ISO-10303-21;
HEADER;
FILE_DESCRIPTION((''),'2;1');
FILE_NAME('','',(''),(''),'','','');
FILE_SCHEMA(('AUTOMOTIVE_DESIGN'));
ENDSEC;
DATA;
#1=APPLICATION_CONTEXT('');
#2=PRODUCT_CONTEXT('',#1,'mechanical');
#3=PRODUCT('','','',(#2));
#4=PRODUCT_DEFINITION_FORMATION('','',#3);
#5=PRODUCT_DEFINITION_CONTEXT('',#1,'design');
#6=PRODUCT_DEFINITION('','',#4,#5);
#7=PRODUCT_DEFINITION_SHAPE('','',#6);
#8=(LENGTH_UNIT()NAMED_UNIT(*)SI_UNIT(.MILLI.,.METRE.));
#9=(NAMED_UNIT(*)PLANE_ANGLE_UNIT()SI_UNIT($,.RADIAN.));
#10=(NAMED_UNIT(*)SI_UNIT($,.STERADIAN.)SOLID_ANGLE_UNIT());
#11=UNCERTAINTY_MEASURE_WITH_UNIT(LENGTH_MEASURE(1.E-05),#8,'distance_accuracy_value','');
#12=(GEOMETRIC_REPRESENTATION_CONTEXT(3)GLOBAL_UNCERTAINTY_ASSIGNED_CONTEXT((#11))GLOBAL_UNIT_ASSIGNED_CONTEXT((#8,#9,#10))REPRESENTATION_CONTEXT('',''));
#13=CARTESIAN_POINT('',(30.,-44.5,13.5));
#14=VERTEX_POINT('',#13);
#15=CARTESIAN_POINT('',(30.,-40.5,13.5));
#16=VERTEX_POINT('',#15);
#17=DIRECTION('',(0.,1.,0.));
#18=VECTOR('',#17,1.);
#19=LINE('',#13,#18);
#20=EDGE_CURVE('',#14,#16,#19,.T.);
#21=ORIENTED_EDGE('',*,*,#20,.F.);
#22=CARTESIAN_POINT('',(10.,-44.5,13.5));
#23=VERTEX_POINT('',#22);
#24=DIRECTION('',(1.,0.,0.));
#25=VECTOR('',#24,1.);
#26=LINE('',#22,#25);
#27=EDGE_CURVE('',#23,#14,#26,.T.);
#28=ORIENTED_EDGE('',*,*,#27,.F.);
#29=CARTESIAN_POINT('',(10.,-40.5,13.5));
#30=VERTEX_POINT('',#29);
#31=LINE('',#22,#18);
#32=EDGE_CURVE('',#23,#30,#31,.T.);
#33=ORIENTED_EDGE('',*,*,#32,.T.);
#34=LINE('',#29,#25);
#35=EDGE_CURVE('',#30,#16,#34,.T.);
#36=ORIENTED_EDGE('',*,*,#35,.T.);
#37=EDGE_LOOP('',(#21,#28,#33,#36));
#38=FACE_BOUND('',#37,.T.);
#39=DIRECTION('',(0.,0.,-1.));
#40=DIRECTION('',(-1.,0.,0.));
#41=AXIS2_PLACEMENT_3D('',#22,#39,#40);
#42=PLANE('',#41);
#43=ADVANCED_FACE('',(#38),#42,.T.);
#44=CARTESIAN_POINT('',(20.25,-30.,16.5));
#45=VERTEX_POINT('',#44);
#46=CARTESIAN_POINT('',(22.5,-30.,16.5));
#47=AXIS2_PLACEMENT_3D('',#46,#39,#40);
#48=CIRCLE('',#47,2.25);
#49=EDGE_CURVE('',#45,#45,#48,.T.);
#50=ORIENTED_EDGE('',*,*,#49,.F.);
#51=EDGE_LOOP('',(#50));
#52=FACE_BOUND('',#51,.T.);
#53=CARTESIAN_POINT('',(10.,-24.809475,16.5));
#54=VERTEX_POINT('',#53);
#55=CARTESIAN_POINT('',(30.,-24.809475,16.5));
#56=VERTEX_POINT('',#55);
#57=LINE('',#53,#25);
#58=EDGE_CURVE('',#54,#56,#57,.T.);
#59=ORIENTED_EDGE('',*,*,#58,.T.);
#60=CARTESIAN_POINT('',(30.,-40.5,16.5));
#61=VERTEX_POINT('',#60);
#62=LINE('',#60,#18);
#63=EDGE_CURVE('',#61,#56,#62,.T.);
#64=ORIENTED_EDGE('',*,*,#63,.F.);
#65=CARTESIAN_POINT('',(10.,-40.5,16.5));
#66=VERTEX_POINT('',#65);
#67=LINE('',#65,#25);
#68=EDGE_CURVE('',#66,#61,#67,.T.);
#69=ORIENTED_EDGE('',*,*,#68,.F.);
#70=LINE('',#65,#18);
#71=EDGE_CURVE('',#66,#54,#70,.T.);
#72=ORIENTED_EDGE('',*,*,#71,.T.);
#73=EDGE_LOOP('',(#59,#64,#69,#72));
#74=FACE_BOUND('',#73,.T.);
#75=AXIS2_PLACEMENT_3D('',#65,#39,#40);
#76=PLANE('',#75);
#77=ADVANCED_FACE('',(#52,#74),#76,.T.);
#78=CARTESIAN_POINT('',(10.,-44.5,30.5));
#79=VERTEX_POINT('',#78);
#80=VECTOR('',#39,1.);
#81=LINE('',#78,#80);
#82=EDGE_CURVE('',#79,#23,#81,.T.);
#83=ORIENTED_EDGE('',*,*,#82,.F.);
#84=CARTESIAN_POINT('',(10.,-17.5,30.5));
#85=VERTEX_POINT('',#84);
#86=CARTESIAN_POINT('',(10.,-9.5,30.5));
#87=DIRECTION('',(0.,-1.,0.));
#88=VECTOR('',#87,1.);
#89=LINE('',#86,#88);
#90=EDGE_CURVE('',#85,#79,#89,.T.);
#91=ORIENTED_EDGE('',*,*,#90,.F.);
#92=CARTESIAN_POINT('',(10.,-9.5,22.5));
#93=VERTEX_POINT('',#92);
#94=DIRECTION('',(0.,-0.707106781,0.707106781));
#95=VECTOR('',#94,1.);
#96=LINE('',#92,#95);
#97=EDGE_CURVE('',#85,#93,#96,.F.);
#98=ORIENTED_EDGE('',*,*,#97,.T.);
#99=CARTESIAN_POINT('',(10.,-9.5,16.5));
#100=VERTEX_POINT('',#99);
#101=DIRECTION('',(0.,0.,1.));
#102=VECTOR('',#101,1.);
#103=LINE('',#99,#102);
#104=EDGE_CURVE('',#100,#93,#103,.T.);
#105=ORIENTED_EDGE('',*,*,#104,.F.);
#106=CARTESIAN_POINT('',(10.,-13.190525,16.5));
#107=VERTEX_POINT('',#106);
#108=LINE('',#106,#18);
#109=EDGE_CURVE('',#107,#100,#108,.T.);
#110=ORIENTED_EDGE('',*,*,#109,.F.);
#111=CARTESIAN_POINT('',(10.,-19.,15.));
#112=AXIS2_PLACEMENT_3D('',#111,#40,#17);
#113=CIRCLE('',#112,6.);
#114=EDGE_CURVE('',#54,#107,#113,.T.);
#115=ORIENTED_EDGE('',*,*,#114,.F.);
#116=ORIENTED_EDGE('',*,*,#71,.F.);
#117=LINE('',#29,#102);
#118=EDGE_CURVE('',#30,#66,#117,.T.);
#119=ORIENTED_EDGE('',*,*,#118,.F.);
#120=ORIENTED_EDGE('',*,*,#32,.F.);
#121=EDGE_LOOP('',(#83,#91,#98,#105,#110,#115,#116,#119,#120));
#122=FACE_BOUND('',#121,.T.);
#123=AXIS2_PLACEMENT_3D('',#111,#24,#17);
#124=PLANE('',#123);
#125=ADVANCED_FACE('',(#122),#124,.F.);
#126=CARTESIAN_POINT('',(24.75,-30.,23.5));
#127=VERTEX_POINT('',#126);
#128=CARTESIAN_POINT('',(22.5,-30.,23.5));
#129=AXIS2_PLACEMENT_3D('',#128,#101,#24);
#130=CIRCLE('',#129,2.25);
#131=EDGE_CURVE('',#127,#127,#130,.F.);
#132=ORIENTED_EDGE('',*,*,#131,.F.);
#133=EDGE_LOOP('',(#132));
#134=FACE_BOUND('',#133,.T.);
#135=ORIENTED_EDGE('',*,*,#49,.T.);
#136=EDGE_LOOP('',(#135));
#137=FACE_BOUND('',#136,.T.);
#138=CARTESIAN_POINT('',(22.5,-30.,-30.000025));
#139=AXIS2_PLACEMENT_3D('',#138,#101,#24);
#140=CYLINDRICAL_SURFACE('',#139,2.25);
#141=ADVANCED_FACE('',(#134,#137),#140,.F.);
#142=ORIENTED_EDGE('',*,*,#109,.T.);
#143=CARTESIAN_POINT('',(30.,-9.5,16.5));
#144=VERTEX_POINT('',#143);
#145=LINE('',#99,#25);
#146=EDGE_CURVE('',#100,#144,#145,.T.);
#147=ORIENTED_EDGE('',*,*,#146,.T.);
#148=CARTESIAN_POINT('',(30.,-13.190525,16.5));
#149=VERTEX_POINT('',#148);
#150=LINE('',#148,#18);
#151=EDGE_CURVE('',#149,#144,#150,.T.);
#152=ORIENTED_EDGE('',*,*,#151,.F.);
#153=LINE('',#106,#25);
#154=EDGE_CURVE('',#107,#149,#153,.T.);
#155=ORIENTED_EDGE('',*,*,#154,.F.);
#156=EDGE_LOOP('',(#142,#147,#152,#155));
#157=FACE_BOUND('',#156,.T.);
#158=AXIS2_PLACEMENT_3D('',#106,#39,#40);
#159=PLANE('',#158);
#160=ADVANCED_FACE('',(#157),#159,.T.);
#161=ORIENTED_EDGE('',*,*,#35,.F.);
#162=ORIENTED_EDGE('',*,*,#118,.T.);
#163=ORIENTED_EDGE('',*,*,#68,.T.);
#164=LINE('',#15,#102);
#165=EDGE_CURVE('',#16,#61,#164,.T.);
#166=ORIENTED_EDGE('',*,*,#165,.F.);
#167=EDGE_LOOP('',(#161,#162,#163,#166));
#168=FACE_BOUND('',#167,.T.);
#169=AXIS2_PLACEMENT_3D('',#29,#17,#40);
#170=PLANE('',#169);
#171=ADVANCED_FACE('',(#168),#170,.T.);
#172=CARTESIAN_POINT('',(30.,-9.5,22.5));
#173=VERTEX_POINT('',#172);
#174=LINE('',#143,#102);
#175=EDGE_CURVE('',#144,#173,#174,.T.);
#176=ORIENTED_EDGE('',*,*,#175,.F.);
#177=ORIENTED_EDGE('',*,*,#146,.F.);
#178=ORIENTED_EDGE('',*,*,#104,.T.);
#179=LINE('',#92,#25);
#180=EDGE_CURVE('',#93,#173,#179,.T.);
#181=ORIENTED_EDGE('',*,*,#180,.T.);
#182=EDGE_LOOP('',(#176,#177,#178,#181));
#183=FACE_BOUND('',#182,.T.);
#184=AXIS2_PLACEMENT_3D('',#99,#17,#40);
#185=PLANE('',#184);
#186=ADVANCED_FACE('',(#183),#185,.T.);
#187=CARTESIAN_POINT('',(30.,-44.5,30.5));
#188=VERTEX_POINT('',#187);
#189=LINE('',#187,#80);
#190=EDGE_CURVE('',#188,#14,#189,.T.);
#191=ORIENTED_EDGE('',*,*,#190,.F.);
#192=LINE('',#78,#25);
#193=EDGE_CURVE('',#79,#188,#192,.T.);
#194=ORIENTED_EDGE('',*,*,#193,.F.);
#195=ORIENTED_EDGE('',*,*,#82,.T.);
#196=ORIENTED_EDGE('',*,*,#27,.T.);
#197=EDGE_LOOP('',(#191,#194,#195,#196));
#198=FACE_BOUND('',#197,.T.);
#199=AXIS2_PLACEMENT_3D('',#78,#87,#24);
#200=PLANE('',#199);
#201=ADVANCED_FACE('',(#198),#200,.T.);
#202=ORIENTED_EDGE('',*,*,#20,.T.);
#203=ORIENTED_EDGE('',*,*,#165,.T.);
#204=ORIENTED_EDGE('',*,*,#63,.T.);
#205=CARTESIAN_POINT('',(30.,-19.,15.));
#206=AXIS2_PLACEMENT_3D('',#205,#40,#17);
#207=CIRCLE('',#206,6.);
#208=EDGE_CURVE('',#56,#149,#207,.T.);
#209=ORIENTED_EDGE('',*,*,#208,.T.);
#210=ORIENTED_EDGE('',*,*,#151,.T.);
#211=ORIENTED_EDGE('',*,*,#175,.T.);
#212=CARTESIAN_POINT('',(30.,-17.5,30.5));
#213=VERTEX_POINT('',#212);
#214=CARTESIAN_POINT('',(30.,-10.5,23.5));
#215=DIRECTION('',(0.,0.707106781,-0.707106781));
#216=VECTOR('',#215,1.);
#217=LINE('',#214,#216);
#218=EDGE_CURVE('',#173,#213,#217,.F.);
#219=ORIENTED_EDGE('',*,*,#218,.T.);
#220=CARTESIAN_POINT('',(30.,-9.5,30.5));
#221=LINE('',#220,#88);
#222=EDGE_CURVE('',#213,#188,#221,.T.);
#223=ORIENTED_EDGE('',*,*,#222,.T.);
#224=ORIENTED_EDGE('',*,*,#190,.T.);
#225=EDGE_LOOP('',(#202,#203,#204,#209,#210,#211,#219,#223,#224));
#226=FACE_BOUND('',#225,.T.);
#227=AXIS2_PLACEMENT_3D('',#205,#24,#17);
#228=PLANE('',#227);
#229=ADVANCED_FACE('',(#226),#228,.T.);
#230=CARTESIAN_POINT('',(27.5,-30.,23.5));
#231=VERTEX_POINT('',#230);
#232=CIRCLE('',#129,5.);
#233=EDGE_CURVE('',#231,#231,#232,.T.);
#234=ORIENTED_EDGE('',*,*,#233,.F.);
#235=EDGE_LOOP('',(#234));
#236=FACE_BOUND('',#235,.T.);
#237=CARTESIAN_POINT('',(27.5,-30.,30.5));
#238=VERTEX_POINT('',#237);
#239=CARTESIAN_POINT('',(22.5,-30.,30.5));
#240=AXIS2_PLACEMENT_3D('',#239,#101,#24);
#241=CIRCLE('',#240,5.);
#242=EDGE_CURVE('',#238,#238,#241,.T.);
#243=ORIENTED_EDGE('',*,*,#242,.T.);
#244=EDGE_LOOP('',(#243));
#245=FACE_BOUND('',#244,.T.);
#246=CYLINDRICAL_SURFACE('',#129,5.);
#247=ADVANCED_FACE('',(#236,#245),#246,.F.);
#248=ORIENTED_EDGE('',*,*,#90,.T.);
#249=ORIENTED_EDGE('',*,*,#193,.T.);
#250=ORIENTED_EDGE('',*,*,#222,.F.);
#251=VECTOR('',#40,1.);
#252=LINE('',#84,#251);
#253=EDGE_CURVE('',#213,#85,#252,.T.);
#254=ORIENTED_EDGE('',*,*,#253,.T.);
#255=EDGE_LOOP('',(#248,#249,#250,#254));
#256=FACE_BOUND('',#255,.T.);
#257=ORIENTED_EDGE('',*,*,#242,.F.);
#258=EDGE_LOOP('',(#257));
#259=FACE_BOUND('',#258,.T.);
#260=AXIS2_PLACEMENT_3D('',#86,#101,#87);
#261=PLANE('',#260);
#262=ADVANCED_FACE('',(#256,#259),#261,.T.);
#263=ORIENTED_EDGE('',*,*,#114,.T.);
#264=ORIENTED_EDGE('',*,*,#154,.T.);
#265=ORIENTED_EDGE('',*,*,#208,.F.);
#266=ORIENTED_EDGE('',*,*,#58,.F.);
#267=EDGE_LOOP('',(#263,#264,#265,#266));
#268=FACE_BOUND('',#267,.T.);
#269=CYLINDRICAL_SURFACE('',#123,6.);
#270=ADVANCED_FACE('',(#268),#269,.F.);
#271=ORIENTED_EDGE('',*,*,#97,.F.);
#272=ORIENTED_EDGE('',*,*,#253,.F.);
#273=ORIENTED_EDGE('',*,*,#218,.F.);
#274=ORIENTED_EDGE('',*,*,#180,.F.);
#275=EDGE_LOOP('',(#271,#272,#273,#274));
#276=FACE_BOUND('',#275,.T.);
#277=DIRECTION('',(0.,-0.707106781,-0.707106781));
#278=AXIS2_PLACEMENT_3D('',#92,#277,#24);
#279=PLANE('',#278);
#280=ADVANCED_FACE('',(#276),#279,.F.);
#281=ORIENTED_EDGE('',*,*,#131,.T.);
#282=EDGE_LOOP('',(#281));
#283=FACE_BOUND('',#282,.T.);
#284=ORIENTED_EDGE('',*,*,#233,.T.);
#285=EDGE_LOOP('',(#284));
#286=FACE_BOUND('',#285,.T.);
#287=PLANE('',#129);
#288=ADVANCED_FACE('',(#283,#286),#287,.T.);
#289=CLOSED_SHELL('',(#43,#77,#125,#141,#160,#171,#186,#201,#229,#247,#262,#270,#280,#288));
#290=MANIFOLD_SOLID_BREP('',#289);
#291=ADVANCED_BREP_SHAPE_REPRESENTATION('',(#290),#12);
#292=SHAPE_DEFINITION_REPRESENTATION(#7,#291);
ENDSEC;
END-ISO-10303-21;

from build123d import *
from build123d.topology import SkipClean

# Parameters (mm, degrees)
SKETCH1_W           = 30
SKETCH1_H           = 59
SKETCH1_R           = 7
BOSS_EXTRUDE1_DEPTH = 30
CUT_EXTRUDE1_START  = -14.5
SKETCH2_W           = 30
SKETCH2_H           = 2
CUT_EXTRUDE1_DEPTH  = 4
BOSS_EXTRUDE2_START = 12
SKETCH4_W           = 45
SKETCH4_H           = 59
SKETCH4_R           = 7
BOSS_EXTRUDE2_DEPTH = 12
SKETCH5_R           = 8
CUT_EXTRUDE3_DEPTH  = 8.5
SKETCH8_R           = 10
CUT_EXTRUDE5_DEPTH  = 3.5
BOSS_EXTRUDE4_START = 1.5
BOSS_EXTRUDE4_DEPTH = 1.5
SKETCH12_R          = 6
CUT_EXTRUDE7_DEPTH  = 22
CHAMFER1_SIZE       = 2
MOVE_FACE1_BY       = 1
SKETCH16_W          = 1
SKETCH16_H          = 8
BOSS_EXTRUDE5_DEPTH = 15
SKETCH14_R          = 2.25
CUT_EXTRUDE9_DEPTH  = 70.083283072
BOSS_EXTRUDE6_DEPTH = 20
SKETCH18_R          = 5
CUT_EXTRUDE10_DEPTH = 3
SKETCH19_R          = 2.25
CUT_EXTRUDE11_DEPTH = 81.873357789
SKETCH20_R          = 5
CUT_EXTRUDE12_DEPTH = 7
CHAMFER2_SIZE       = 8
CUT_EXTRUDE13_DEPTH = 2
SKETCH22_R          = 3.3
CUT_EXTRUDE14_DEPTH = 15
CUT_EXTRUDE15_START = -3
CUT_EXTRUDE15_DEPTH = 7
SKETCH24_W          = 8
SKETCH24_H          = 4
SKETCH24_W_2        = 4
SKETCH24_H_2        = 8
BOSS_EXTRUDE7_DEPTH = 4
CUT_EXTRUDE16_START = -31.5
CUT_EXTRUDE16_DEPTH = 31.5


with BuildPart() as part:
    # Sketch1 → Boss-Extrude1 (new body)
    with BuildSketch(Plane.XY):
        with Locations((0, -15)):
            Rectangle(SKETCH1_W, SKETCH1_H)
        Circle(SKETCH1_R, mode=Mode.SUBTRACT)
    extrude(amount=-BOSS_EXTRUDE1_DEPTH)

    # Sketch2 → Cut-Extrude1 (cut, symmetric)
    with BuildSketch(Plane.XZ.offset(44.5).offset(CUT_EXTRUDE1_START)):
        with Locations((0, -29)):
            Rectangle(SKETCH2_W, SKETCH2_H)
    extrude(amount=CUT_EXTRUDE1_DEPTH, both=True, mode=Mode.SUBTRACT)

    # Sketch4 → Boss-Extrude2 (add)
    with BuildSketch(Plane.XY.offset(BOSS_EXTRUDE2_START)):
        with Locations((7.5, -15)):
            Rectangle(SKETCH4_W, SKETCH4_H)
        Circle(SKETCH4_R, mode=Mode.SUBTRACT)
    extrude(amount=-BOSS_EXTRUDE2_DEPTH)

    # Sketch5 → Cut-Extrude3 (cut)
    with BuildSketch(Plane.XY.offset(12)):
        Circle(SKETCH5_R)
    extrude(amount=-CUT_EXTRUDE3_DEPTH, mode=Mode.SUBTRACT)

    # Sketch8 → Cut-Extrude5 (cut)
    with BuildSketch(Plane.XY.offset(12)):
        Circle(SKETCH8_R)
    extrude(amount=-CUT_EXTRUDE5_DEPTH, mode=Mode.SUBTRACT)

    # Sketch11 → Boss-Extrude4 (add)
    with SkipClean():  # the faces are left unmerged after this step: merging them gives an invalid solid
        with BuildSketch(Plane.XY.offset(12).offset(BOSS_EXTRUDE4_START)):
            with BuildLine():
                Line((30, 14.5), (8, 14.5))
                Line((8, 14.5), (8, 6))
                ThreePointArc((8, 6), (10, 0), (8, -6))
                Line((8, -6), (8, -44.5))
                Line((8, -44.5), (30, -44.5))
                Line((30, -44.5), (30, 14.5))
            make_face()
        extrude(amount=-BOSS_EXTRUDE4_DEPTH)

    # Sketch12 → Cut-Extrude7 (cut)
    with SkipClean():  # the faces are left unmerged after this step: merging them gives an invalid solid
        with BuildSketch(Plane(origin=(30, 0, 0), x_dir=(0, 0, -1), z_dir=(1, 0, 0))):
            with Locations((-15, -19)):
                Circle(SKETCH12_R)
        extrude(amount=-CUT_EXTRUDE7_DEPTH, mode=Mode.SUBTRACT)

    # Chamfer1
    # the kernel refuses this chamfer: 2 mm, written as the material it adds along each edge
    with BuildSketch(Plane(origin=(8, -19.052786447, 12), x_dir=(-0.9996219169112968, 0, -0.027495876610586487), z_dir=(0, -1, 0))) as chamfer1_piece_1_section:
        Polygon((CHAMFER1_SIZE * 0.999621916911, -CHAMFER1_SIZE * 0.0274958766106), (-CHAMFER1_SIZE * 0.0274958766106, -CHAMFER1_SIZE * 0.999621916911), (0, 0), align=None)
    chamfer1_piece_1 = extrude(amount=25.447213553, mode=Mode.PRIVATE)
    chamfer1_piece_1 = chamfer1_piece_1 - Plane(origin=(7.298262976, -19, 15), x_dir=(0, 0, -1), z_dir=(1, 0, 0)) * Cylinder(6, 59, mode=Mode.PRIVATE)
    chamfer1_piece_1 = split(chamfer1_piece_1, bisect_by=Plane(origin=(7.298262976, -34.489945177, 13.5), z_dir=(0, 0, -1)), keep=Keep.TOP, mode=Mode.PRIVATE)
    add(chamfer1_piece_1)
    with BuildSketch(Plane(origin=(8, 14.5, 12), x_dir=(-0.9996219169112968, 0, -0.027495876610586487), z_dir=(0, -1, 0))) as chamfer1_piece_2_section:
        Polygon((CHAMFER1_SIZE * 0.999621916911, -CHAMFER1_SIZE * 0.0274958766106), (-CHAMFER1_SIZE * 0.0274958766106, -CHAMFER1_SIZE * 0.999621916911), (0, 0), align=None)
    chamfer1_piece_2 = extrude(amount=13.643365976, mode=Mode.PRIVATE)
    chamfer1_piece_2 = chamfer1_piece_2 - Plane(origin=(0, 0, 12.610971558), x_dir=(1, 0, 0), z_dir=(0, 0, 1)) * Cylinder(10, 36, mode=Mode.PRIVATE)
    chamfer1_piece_2 = split(chamfer1_piece_2, bisect_by=Plane(origin=(7.329577736, 10.634975656, 13.5), z_dir=(0, 0, -1)), keep=Keep.TOP, mode=Mode.PRIVATE)
    add(chamfer1_piece_2)
    with BuildSketch(Plane(origin=(8, -0.856634024, 12), x_dir=(-0.9996219169112968, 0, -0.027495876610586487), z_dir=(0, -1, 0))) as chamfer1_piece_3_section:
        Polygon((CHAMFER1_SIZE * 0.999621916911, -CHAMFER1_SIZE * 0.0274958766106), (-CHAMFER1_SIZE * 0.0274958766106, -CHAMFER1_SIZE * 0.999621916911), (0, 0), align=None)
    chamfer1_piece_3 = extrude(amount=18.090579529, mode=Mode.PRIVATE)
    chamfer1_piece_3 = chamfer1_piece_3 - Plane(origin=(7.328722349, -19, 15), x_dir=(0, 0, -1), z_dir=(1, 0, 0)) * Cylinder(6, 45, mode=Mode.PRIVATE)
    chamfer1_piece_3 = chamfer1_piece_3 - Plane(origin=(0, 0, 12.602221716), x_dir=(1, 0, 0), z_dir=(0, 0, 1)) * Cylinder(10, 45, mode=Mode.PRIVATE)
    chamfer1_piece_3 = split(chamfer1_piece_3, bisect_by=Plane(origin=(7.328722349, -10.144229593, 13.5), z_dir=(0, 0, -1)), keep=Keep.TOP, mode=Mode.PRIVATE)
    add(chamfer1_piece_3)

    # Move Face1: a face moved outward by 1.0
    extrude(part.faces().sort_by_distance((8, -19, 10.769879029))[0], amount=MOVE_FACE1_BY, dir=(1, 0, 0))

    # Sketch16 → Boss-Extrude5 (add)
    with BuildSketch(Plane(origin=(30, 0, 0), x_dir=(0, 0, -1), z_dir=(1, 0, 0))):
        with Locations((0.5, 0)):
            Rectangle(SKETCH16_W, SKETCH16_H)
        with Locations((0.5, -30)):
            Rectangle(SKETCH16_W, SKETCH16_H)
    extrude(amount=-BOSS_EXTRUDE5_DEPTH)

    # Sketch14 → Cut-Extrude9 (cut, through all)
    with BuildSketch(Plane.XY.offset(13.5)):
        with Locations((22.5, 0)):
            Circle(SKETCH14_R)
        with Locations((22.5, -30)):
            Circle(SKETCH14_R)
    extrude(amount=-CUT_EXTRUDE9_DEPTH, mode=Mode.SUBTRACT)

    # Sketch18 → Cut-Extrude10 (cut)
    with BuildSketch(Plane.XY.offset(13.5)):
        with Locations((22.5, 0)):
            Circle(SKETCH18_R)
    extrude(amount=-CUT_EXTRUDE10_DEPTH, mode=Mode.SUBTRACT)

    # Sketch21 → Cut-Extrude13 (cut)
    with BuildSketch(Plane(origin=(15, 0, 0), x_dir=(0, 0, -1), z_dir=(1, 0, 0))):
        Polygon((0, 9), (10, 9), (10, -9), (0, -9), (0, -4), (1, -4), (1, 4), (0, 4), align=None)
        Polygon((0, -21), (10, -21), (10, -39), (0, -39), (0, -34), (1, -34), (1, -26), (0, -26), align=None)
    extrude(amount=-CUT_EXTRUDE13_DEPTH, mode=Mode.SUBTRACT)

    # Sketch22 → Cut-Extrude14 (cut)
    with BuildSketch(Plane(origin=(0, 0, -28), x_dir=(-1, 0, 0), z_dir=(0, 0, -1))):
        with Locations((-0.001598667, -30)):
            Circle(SKETCH22_R)
    extrude(amount=-CUT_EXTRUDE14_DEPTH, mode=Mode.SUBTRACT)

    # Sketch23 → Cut-Extrude15 (cut)
    with BuildSketch(Plane(origin=(0, 0, -28), x_dir=(-1, 0, 0), z_dir=(0, 0, -1)).offset(CUT_EXTRUDE15_START)):
        Polygon((-5.101598667, -32.944486373), (-5.101598667, -44.5), (5.098401333, -44.5), (5.098401333, -32.944486373), (5.098401333, -27.055513627), (-0.001598667, -24.111027254), (-5.101598667, -27.055513627), align=None)
    extrude(amount=-CUT_EXTRUDE15_DEPTH, mode=Mode.SUBTRACT)

    # Sketch24 → Boss-Extrude7 (add)
    with BuildSketch(Plane(origin=(15, 0, 0), x_dir=(0, 0, -1), z_dir=(1, 0, 0))):
        with Locations((15, 12.5)):
            Rectangle(SKETCH24_W, SKETCH24_H)
        with Locations((28, 0)):
            Rectangle(SKETCH24_W_2, SKETCH24_H_2)
    extrude(amount=BOSS_EXTRUDE7_DEPTH)

    # Sketch25 → Cut-Extrude16 (cut)
    with BuildSketch(Plane(origin=(0, 0, -30), x_dir=(-1, 0, 0), z_dir=(0, 0, -1)).offset(CUT_EXTRUDE16_START)):
        with BuildLine():
            Line((-8.191520443, 5.735764364), (-12.207745888, 0))
            Line((-12.207745888, 0), (-8.191520443, -5.735764364))
            ThreePointArc((-8.191520443, -5.735764364), (10, 0), (-8.191520443, 5.735764364))
        make_face()
    extrude(amount=CUT_EXTRUDE16_DEPTH, mode=Mode.SUBTRACT)


with BuildPart() as body_2:
    # Sketch17 → Boss-Extrude6 (new body)
    with BuildSketch(Plane(origin=(30, 0, 0), x_dir=(0, 0, -1), z_dir=(1, 0, 0))):
        with BuildLine():
            Line((-16.5, -13.190524981), (-16.5, -9.5))
            Line((-16.5, -9.5), (-30.5, -9.5))
            Line((-30.5, -9.5), (-30.5, -44.5))
            Line((-30.5, -44.5), (-13.5, -44.5))
            Line((-13.5, -44.5), (-13.5, -40.5))
            Line((-13.5, -40.5), (-16.5, -40.5))
            Line((-16.5, -40.5), (-16.5, -24.809475019))
            ThreePointArc((-16.5, -24.809475019), (-21, -19), (-16.5, -13.190524981))
        make_face()
    extrude(amount=-BOSS_EXTRUDE6_DEPTH)

    # Sketch19 → Cut-Extrude11 (cut, through all)
    with BuildSketch(Plane.XY.offset(30.5)):
        with Locations((22.5, -30)):
            Circle(SKETCH19_R)
    extrude(amount=-CUT_EXTRUDE11_DEPTH, mode=Mode.SUBTRACT)

    # Sketch20 → Cut-Extrude12 (cut)
    with BuildSketch(Plane.XY.offset(30.5)):
        with Locations((22.5, -30)):
            Circle(SKETCH20_R)
    extrude(amount=-CUT_EXTRUDE12_DEPTH, mode=Mode.SUBTRACT)

    # Chamfer2
    chamfer2_edges = [body_2.edges().sort_by_distance(p)[0] for p in [
        (20, -9.5, 30.5),
    ]]
    chamfer(chamfer2_edges, length=CHAMFER2_SIZE)


solid = body_2.part
